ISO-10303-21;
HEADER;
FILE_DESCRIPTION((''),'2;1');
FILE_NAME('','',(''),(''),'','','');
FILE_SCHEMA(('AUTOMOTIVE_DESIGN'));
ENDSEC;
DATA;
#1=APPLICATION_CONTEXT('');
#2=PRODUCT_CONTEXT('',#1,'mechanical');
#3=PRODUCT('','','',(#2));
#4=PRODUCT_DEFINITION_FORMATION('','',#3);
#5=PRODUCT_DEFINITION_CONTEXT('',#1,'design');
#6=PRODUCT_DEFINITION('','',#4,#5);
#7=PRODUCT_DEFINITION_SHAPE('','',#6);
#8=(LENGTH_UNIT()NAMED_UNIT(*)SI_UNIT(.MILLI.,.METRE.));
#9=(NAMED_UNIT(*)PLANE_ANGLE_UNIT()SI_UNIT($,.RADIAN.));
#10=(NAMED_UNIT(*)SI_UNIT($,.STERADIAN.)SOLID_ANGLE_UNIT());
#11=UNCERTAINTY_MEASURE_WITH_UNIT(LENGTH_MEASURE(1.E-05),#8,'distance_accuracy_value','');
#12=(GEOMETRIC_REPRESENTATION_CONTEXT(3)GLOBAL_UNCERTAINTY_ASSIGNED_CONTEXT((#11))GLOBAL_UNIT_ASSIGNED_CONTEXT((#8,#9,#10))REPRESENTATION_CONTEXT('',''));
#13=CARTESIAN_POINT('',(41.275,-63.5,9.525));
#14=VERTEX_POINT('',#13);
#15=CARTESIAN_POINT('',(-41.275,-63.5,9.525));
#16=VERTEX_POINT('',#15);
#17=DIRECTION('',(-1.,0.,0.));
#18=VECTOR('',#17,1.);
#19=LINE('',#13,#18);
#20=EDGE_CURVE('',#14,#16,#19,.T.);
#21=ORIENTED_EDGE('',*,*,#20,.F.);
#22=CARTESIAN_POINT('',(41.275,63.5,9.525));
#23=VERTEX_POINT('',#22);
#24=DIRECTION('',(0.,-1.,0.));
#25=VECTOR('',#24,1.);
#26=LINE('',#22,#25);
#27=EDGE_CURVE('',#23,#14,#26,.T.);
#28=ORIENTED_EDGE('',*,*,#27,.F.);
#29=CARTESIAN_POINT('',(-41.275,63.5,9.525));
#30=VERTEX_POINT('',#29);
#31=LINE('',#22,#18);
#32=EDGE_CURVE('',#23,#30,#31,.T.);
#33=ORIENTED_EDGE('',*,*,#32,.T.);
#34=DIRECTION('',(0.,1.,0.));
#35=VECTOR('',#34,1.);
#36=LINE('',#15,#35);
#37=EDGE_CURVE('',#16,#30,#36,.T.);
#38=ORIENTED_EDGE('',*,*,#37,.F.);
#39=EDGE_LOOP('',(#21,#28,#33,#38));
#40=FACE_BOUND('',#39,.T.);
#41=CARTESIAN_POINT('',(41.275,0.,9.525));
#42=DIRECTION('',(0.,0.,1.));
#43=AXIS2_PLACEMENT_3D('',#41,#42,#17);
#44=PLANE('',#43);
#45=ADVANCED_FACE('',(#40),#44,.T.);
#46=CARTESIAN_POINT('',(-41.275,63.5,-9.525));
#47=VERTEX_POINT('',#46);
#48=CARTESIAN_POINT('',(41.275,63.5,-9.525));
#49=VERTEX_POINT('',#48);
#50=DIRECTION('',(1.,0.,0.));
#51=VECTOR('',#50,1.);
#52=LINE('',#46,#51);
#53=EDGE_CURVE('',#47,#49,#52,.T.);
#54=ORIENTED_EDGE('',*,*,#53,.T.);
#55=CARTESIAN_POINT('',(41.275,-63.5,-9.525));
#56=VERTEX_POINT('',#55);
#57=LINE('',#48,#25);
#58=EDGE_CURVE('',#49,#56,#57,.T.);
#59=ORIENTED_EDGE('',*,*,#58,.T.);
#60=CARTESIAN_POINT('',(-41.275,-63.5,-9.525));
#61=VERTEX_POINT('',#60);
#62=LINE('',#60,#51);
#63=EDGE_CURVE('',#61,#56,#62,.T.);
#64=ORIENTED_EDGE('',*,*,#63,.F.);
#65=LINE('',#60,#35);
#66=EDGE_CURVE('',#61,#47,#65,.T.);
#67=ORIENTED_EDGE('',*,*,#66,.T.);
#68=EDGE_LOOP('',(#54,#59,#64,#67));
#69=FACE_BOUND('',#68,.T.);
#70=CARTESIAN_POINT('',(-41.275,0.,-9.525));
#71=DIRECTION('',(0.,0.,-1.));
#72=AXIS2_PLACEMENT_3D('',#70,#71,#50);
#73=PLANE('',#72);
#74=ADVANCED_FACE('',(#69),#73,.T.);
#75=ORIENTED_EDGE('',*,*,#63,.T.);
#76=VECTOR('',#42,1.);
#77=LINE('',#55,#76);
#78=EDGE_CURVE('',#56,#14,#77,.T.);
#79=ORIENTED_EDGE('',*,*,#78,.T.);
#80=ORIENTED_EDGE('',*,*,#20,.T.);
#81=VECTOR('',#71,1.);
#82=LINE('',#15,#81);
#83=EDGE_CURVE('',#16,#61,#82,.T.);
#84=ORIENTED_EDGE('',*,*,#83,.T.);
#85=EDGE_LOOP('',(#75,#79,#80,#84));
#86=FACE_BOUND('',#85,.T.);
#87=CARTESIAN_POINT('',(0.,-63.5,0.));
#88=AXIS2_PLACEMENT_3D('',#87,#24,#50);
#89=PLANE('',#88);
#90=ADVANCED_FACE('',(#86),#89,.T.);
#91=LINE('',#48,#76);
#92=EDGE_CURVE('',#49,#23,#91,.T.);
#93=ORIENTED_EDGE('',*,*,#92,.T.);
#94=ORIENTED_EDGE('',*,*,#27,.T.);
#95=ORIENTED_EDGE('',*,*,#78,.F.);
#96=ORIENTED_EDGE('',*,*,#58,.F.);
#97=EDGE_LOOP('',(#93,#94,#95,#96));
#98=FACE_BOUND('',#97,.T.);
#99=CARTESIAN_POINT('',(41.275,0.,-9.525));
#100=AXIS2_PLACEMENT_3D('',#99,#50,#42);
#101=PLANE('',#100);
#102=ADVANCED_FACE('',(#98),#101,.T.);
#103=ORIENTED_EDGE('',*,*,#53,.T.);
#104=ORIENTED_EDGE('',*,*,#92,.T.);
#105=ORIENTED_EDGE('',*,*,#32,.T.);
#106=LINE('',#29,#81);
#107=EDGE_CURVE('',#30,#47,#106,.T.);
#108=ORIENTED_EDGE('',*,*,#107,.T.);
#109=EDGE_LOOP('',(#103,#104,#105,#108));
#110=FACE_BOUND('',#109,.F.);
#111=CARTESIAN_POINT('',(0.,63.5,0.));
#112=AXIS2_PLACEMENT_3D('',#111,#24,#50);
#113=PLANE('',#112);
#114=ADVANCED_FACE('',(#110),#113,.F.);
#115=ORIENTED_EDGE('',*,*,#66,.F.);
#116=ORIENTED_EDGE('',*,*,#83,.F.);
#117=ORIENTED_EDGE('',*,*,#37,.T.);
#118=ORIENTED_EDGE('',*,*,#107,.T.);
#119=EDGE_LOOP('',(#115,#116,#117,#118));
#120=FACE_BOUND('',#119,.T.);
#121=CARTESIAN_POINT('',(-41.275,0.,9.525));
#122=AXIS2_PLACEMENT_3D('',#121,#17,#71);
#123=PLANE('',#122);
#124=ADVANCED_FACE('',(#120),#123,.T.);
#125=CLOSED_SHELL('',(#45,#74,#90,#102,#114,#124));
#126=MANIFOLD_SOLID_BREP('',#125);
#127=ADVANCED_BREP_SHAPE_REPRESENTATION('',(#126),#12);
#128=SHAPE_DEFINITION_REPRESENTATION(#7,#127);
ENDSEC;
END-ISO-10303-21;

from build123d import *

# Parameters (mm, degrees)
F2_DEPTH = 63.5


# Not quite as in the source:
# - a feature of the source that left no trace in its solid (it failed there, or was rolled back) is left out


with BuildPart() as f2:
    # F0 (on Front) → F2 (new body, symmetric)
    with BuildSketch(Plane.XZ):
        Polygon((-41.275, -9.525), (41.275, -9.525), (41.275, 9.525), (22.225, 9.525), (-41.275, 9.525), align=None)
    extrude(amount=F2_DEPTH, both=True)


solid = f2.part
